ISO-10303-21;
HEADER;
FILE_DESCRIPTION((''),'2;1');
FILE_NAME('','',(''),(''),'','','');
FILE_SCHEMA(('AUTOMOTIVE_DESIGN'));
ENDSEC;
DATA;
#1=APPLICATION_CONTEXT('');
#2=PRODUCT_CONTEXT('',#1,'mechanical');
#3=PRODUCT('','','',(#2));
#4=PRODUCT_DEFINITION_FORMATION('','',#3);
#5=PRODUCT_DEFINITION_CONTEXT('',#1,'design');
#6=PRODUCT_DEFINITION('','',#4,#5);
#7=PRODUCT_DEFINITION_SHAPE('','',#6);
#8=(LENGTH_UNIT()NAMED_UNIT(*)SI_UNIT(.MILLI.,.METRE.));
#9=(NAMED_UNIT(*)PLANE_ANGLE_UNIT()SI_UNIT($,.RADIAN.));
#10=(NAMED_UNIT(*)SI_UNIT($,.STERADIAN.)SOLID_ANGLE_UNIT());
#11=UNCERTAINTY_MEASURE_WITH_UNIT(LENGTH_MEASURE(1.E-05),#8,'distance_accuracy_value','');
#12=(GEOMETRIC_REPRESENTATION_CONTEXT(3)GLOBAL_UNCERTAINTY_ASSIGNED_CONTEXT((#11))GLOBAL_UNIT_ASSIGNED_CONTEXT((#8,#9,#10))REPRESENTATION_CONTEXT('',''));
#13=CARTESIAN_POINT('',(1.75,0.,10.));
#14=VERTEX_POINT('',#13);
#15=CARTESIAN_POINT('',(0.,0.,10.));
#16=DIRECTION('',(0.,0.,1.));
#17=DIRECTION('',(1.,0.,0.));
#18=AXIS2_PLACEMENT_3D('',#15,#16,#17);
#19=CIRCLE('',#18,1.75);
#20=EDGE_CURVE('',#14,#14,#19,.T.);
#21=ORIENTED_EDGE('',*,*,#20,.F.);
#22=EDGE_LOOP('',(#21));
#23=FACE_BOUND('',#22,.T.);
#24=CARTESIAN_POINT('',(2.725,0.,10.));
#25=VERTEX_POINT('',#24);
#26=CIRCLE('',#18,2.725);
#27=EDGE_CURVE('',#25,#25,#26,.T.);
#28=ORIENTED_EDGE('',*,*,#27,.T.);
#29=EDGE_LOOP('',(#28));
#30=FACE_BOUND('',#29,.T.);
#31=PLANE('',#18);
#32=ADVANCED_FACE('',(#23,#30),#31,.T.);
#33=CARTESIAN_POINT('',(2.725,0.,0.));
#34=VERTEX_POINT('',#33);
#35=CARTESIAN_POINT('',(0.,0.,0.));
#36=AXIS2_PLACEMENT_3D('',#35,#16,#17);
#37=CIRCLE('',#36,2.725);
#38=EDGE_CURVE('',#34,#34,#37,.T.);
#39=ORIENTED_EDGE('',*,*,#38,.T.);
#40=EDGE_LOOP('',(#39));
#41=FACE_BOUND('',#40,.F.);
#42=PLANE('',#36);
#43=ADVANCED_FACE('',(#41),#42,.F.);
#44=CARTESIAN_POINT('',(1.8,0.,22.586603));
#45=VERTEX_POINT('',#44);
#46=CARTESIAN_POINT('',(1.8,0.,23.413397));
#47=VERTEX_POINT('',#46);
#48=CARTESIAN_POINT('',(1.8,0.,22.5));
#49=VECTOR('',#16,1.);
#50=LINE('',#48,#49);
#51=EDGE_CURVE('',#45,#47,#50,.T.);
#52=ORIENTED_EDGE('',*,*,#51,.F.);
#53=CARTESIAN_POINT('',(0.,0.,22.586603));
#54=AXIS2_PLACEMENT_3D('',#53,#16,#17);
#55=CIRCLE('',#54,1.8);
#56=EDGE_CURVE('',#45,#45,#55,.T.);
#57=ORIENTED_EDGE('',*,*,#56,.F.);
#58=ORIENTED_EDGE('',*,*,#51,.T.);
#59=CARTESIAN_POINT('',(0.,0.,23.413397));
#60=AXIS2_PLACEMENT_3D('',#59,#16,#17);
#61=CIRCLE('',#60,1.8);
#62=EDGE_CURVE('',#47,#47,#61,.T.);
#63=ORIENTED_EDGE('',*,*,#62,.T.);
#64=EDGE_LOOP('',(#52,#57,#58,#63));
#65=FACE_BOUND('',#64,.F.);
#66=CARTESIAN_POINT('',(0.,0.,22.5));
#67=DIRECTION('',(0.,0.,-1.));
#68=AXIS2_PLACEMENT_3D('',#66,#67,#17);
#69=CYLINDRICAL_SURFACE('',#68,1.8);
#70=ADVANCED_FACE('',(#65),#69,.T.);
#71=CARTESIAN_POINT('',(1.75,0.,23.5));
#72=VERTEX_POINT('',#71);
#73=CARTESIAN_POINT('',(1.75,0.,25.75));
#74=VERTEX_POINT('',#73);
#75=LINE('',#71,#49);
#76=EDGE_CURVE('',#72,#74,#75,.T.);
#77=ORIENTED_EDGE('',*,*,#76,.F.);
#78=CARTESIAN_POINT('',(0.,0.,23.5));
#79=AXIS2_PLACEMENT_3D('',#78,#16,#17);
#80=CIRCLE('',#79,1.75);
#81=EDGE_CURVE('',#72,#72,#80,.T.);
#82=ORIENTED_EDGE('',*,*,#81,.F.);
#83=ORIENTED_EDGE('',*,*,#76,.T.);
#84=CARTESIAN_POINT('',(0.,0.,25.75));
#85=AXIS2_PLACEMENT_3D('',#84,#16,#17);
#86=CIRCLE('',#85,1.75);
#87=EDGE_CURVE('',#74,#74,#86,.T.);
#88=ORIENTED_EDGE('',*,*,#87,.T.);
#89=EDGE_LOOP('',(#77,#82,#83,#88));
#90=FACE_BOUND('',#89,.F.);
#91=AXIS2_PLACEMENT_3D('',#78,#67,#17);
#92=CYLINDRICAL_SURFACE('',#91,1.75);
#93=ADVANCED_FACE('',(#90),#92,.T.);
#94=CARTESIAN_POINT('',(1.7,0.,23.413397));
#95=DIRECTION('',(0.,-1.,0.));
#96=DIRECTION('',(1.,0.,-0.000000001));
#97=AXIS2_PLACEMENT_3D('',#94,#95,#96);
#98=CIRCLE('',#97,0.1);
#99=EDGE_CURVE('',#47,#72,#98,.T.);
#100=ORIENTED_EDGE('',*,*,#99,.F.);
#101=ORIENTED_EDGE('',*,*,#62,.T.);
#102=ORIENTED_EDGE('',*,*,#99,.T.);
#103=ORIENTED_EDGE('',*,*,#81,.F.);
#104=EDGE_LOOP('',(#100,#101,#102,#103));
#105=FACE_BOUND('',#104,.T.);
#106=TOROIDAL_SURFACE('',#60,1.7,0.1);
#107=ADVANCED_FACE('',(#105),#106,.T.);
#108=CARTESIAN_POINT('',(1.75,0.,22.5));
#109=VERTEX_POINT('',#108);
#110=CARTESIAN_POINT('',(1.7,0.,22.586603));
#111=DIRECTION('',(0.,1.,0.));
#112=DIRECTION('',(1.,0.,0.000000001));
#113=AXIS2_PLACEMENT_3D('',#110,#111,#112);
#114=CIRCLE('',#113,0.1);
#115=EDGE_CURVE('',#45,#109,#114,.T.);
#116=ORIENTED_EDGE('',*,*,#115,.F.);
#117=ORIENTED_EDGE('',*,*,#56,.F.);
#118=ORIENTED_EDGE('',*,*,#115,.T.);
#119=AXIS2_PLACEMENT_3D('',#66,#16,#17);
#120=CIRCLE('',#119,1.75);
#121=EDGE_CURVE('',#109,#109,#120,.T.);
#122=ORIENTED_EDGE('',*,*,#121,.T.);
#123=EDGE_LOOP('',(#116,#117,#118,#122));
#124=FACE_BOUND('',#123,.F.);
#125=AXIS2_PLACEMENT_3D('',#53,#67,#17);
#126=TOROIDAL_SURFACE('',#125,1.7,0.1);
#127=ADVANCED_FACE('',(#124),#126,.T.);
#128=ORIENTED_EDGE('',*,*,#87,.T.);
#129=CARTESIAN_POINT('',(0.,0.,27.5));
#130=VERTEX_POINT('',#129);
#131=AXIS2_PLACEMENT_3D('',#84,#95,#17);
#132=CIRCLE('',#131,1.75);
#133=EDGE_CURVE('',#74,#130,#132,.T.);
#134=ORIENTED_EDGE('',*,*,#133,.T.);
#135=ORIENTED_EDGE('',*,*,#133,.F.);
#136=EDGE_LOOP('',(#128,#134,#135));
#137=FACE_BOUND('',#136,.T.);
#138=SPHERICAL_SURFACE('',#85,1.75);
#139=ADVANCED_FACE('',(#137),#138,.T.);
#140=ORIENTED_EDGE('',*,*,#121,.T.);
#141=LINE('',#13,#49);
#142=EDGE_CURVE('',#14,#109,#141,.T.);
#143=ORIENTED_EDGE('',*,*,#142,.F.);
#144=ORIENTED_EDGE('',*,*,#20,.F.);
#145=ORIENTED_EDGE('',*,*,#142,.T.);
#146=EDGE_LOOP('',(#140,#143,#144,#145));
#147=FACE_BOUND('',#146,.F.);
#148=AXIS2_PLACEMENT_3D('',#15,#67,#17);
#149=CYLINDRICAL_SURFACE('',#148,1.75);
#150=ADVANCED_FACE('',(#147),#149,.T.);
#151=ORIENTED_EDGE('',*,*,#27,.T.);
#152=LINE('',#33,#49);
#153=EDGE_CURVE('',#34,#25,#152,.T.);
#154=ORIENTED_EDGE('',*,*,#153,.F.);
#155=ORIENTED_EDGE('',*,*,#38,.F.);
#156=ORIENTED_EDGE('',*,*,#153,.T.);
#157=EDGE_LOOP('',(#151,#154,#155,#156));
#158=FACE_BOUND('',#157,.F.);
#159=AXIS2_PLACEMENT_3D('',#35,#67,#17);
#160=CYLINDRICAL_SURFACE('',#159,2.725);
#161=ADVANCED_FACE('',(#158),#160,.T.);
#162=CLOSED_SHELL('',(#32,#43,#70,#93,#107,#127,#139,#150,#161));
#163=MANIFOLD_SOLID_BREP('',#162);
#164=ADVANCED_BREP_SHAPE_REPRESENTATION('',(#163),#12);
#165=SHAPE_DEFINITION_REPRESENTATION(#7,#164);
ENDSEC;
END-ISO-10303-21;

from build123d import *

# Parameters (mm, degrees)
F0_R     = 2.725
F1_DEPTH = 10
F2_R     = 1.75
F3_DEPTH = 12.5
F4_R     = 1.8
F4_R_2   = 1.75
F5_DEPTH = 1
F6_R     = 1.75
F7_DEPTH = 4
F9_R     = 1.75


# Not quite as in the source:
# - a fillet or chamfer that OpenCascade refuses, or shapes differently, is made with other operations: its cross-section is extruded or revolved along the edge and cut away or added


with BuildPart() as f1:
    # F0 (on Top) → F1 (new body)
    with BuildSketch(Plane.XY):
        Circle(F0_R)
    extrude(amount=F1_DEPTH)

    # F2 (on face) → F3 (join)
    with BuildSketch(Plane.XY.offset(10)):
        Circle(F2_R)
    extrude(amount=F3_DEPTH)

    # F4 (on face) → F5 (join)
    with BuildSketch(Plane.XY.offset(22.5)):
        Circle(F4_R)
        Circle(F4_R_2, mode=Mode.SUBTRACT)
        Circle(F4_R_2)
    extrude(amount=F5_DEPTH)

    # F6 (on face) → F7 (join)
    with BuildSketch(Plane.XY.offset(23.5)):
        Circle(F6_R)
    extrude(amount=F7_DEPTH)

    # F8: fillet of radius 0.1 on 2 edges, made by hand

    # F8_s1 → F8_t2 (revolve, cut)
    with BuildSketch(Plane.XZ):
        with BuildLine():
            ThreePointArc((1.8, 23.4133974596), (1.7866025404, 23.4633974596), (1.75, 23.5))
            Line((1.75, 23.5), (1.8, 23.5))
            Line((1.8, 23.5), (1.8, 23.4133974596))
        make_face()
    revolve(axis=Axis((0, 0, 23.5), (0, 0, 1)), mode=Mode.SUBTRACT)

    # F8_s3 → F8_t4 (revolve, cut)
    with BuildSketch(Plane.XZ):
        with BuildLine():
            ThreePointArc((1.8, 22.5866025404), (1.7866025404, 22.5366025404), (1.75, 22.5))
            Line((1.75, 22.5), (1.8, 22.5))
            Line((1.8, 22.5), (1.8, 22.5866025404))
        make_face()
    revolve(axis=Axis((0, 0, 22.5), (0, 0, 1)), mode=Mode.SUBTRACT)

    # F9
    f9_edges = [f1.edges().sort_by_distance(p)[0] for p in [
        (-1.75, 0, 27.5),
    ]]
    fillet(f9_edges, radius=F9_R)


solid = f1.part
